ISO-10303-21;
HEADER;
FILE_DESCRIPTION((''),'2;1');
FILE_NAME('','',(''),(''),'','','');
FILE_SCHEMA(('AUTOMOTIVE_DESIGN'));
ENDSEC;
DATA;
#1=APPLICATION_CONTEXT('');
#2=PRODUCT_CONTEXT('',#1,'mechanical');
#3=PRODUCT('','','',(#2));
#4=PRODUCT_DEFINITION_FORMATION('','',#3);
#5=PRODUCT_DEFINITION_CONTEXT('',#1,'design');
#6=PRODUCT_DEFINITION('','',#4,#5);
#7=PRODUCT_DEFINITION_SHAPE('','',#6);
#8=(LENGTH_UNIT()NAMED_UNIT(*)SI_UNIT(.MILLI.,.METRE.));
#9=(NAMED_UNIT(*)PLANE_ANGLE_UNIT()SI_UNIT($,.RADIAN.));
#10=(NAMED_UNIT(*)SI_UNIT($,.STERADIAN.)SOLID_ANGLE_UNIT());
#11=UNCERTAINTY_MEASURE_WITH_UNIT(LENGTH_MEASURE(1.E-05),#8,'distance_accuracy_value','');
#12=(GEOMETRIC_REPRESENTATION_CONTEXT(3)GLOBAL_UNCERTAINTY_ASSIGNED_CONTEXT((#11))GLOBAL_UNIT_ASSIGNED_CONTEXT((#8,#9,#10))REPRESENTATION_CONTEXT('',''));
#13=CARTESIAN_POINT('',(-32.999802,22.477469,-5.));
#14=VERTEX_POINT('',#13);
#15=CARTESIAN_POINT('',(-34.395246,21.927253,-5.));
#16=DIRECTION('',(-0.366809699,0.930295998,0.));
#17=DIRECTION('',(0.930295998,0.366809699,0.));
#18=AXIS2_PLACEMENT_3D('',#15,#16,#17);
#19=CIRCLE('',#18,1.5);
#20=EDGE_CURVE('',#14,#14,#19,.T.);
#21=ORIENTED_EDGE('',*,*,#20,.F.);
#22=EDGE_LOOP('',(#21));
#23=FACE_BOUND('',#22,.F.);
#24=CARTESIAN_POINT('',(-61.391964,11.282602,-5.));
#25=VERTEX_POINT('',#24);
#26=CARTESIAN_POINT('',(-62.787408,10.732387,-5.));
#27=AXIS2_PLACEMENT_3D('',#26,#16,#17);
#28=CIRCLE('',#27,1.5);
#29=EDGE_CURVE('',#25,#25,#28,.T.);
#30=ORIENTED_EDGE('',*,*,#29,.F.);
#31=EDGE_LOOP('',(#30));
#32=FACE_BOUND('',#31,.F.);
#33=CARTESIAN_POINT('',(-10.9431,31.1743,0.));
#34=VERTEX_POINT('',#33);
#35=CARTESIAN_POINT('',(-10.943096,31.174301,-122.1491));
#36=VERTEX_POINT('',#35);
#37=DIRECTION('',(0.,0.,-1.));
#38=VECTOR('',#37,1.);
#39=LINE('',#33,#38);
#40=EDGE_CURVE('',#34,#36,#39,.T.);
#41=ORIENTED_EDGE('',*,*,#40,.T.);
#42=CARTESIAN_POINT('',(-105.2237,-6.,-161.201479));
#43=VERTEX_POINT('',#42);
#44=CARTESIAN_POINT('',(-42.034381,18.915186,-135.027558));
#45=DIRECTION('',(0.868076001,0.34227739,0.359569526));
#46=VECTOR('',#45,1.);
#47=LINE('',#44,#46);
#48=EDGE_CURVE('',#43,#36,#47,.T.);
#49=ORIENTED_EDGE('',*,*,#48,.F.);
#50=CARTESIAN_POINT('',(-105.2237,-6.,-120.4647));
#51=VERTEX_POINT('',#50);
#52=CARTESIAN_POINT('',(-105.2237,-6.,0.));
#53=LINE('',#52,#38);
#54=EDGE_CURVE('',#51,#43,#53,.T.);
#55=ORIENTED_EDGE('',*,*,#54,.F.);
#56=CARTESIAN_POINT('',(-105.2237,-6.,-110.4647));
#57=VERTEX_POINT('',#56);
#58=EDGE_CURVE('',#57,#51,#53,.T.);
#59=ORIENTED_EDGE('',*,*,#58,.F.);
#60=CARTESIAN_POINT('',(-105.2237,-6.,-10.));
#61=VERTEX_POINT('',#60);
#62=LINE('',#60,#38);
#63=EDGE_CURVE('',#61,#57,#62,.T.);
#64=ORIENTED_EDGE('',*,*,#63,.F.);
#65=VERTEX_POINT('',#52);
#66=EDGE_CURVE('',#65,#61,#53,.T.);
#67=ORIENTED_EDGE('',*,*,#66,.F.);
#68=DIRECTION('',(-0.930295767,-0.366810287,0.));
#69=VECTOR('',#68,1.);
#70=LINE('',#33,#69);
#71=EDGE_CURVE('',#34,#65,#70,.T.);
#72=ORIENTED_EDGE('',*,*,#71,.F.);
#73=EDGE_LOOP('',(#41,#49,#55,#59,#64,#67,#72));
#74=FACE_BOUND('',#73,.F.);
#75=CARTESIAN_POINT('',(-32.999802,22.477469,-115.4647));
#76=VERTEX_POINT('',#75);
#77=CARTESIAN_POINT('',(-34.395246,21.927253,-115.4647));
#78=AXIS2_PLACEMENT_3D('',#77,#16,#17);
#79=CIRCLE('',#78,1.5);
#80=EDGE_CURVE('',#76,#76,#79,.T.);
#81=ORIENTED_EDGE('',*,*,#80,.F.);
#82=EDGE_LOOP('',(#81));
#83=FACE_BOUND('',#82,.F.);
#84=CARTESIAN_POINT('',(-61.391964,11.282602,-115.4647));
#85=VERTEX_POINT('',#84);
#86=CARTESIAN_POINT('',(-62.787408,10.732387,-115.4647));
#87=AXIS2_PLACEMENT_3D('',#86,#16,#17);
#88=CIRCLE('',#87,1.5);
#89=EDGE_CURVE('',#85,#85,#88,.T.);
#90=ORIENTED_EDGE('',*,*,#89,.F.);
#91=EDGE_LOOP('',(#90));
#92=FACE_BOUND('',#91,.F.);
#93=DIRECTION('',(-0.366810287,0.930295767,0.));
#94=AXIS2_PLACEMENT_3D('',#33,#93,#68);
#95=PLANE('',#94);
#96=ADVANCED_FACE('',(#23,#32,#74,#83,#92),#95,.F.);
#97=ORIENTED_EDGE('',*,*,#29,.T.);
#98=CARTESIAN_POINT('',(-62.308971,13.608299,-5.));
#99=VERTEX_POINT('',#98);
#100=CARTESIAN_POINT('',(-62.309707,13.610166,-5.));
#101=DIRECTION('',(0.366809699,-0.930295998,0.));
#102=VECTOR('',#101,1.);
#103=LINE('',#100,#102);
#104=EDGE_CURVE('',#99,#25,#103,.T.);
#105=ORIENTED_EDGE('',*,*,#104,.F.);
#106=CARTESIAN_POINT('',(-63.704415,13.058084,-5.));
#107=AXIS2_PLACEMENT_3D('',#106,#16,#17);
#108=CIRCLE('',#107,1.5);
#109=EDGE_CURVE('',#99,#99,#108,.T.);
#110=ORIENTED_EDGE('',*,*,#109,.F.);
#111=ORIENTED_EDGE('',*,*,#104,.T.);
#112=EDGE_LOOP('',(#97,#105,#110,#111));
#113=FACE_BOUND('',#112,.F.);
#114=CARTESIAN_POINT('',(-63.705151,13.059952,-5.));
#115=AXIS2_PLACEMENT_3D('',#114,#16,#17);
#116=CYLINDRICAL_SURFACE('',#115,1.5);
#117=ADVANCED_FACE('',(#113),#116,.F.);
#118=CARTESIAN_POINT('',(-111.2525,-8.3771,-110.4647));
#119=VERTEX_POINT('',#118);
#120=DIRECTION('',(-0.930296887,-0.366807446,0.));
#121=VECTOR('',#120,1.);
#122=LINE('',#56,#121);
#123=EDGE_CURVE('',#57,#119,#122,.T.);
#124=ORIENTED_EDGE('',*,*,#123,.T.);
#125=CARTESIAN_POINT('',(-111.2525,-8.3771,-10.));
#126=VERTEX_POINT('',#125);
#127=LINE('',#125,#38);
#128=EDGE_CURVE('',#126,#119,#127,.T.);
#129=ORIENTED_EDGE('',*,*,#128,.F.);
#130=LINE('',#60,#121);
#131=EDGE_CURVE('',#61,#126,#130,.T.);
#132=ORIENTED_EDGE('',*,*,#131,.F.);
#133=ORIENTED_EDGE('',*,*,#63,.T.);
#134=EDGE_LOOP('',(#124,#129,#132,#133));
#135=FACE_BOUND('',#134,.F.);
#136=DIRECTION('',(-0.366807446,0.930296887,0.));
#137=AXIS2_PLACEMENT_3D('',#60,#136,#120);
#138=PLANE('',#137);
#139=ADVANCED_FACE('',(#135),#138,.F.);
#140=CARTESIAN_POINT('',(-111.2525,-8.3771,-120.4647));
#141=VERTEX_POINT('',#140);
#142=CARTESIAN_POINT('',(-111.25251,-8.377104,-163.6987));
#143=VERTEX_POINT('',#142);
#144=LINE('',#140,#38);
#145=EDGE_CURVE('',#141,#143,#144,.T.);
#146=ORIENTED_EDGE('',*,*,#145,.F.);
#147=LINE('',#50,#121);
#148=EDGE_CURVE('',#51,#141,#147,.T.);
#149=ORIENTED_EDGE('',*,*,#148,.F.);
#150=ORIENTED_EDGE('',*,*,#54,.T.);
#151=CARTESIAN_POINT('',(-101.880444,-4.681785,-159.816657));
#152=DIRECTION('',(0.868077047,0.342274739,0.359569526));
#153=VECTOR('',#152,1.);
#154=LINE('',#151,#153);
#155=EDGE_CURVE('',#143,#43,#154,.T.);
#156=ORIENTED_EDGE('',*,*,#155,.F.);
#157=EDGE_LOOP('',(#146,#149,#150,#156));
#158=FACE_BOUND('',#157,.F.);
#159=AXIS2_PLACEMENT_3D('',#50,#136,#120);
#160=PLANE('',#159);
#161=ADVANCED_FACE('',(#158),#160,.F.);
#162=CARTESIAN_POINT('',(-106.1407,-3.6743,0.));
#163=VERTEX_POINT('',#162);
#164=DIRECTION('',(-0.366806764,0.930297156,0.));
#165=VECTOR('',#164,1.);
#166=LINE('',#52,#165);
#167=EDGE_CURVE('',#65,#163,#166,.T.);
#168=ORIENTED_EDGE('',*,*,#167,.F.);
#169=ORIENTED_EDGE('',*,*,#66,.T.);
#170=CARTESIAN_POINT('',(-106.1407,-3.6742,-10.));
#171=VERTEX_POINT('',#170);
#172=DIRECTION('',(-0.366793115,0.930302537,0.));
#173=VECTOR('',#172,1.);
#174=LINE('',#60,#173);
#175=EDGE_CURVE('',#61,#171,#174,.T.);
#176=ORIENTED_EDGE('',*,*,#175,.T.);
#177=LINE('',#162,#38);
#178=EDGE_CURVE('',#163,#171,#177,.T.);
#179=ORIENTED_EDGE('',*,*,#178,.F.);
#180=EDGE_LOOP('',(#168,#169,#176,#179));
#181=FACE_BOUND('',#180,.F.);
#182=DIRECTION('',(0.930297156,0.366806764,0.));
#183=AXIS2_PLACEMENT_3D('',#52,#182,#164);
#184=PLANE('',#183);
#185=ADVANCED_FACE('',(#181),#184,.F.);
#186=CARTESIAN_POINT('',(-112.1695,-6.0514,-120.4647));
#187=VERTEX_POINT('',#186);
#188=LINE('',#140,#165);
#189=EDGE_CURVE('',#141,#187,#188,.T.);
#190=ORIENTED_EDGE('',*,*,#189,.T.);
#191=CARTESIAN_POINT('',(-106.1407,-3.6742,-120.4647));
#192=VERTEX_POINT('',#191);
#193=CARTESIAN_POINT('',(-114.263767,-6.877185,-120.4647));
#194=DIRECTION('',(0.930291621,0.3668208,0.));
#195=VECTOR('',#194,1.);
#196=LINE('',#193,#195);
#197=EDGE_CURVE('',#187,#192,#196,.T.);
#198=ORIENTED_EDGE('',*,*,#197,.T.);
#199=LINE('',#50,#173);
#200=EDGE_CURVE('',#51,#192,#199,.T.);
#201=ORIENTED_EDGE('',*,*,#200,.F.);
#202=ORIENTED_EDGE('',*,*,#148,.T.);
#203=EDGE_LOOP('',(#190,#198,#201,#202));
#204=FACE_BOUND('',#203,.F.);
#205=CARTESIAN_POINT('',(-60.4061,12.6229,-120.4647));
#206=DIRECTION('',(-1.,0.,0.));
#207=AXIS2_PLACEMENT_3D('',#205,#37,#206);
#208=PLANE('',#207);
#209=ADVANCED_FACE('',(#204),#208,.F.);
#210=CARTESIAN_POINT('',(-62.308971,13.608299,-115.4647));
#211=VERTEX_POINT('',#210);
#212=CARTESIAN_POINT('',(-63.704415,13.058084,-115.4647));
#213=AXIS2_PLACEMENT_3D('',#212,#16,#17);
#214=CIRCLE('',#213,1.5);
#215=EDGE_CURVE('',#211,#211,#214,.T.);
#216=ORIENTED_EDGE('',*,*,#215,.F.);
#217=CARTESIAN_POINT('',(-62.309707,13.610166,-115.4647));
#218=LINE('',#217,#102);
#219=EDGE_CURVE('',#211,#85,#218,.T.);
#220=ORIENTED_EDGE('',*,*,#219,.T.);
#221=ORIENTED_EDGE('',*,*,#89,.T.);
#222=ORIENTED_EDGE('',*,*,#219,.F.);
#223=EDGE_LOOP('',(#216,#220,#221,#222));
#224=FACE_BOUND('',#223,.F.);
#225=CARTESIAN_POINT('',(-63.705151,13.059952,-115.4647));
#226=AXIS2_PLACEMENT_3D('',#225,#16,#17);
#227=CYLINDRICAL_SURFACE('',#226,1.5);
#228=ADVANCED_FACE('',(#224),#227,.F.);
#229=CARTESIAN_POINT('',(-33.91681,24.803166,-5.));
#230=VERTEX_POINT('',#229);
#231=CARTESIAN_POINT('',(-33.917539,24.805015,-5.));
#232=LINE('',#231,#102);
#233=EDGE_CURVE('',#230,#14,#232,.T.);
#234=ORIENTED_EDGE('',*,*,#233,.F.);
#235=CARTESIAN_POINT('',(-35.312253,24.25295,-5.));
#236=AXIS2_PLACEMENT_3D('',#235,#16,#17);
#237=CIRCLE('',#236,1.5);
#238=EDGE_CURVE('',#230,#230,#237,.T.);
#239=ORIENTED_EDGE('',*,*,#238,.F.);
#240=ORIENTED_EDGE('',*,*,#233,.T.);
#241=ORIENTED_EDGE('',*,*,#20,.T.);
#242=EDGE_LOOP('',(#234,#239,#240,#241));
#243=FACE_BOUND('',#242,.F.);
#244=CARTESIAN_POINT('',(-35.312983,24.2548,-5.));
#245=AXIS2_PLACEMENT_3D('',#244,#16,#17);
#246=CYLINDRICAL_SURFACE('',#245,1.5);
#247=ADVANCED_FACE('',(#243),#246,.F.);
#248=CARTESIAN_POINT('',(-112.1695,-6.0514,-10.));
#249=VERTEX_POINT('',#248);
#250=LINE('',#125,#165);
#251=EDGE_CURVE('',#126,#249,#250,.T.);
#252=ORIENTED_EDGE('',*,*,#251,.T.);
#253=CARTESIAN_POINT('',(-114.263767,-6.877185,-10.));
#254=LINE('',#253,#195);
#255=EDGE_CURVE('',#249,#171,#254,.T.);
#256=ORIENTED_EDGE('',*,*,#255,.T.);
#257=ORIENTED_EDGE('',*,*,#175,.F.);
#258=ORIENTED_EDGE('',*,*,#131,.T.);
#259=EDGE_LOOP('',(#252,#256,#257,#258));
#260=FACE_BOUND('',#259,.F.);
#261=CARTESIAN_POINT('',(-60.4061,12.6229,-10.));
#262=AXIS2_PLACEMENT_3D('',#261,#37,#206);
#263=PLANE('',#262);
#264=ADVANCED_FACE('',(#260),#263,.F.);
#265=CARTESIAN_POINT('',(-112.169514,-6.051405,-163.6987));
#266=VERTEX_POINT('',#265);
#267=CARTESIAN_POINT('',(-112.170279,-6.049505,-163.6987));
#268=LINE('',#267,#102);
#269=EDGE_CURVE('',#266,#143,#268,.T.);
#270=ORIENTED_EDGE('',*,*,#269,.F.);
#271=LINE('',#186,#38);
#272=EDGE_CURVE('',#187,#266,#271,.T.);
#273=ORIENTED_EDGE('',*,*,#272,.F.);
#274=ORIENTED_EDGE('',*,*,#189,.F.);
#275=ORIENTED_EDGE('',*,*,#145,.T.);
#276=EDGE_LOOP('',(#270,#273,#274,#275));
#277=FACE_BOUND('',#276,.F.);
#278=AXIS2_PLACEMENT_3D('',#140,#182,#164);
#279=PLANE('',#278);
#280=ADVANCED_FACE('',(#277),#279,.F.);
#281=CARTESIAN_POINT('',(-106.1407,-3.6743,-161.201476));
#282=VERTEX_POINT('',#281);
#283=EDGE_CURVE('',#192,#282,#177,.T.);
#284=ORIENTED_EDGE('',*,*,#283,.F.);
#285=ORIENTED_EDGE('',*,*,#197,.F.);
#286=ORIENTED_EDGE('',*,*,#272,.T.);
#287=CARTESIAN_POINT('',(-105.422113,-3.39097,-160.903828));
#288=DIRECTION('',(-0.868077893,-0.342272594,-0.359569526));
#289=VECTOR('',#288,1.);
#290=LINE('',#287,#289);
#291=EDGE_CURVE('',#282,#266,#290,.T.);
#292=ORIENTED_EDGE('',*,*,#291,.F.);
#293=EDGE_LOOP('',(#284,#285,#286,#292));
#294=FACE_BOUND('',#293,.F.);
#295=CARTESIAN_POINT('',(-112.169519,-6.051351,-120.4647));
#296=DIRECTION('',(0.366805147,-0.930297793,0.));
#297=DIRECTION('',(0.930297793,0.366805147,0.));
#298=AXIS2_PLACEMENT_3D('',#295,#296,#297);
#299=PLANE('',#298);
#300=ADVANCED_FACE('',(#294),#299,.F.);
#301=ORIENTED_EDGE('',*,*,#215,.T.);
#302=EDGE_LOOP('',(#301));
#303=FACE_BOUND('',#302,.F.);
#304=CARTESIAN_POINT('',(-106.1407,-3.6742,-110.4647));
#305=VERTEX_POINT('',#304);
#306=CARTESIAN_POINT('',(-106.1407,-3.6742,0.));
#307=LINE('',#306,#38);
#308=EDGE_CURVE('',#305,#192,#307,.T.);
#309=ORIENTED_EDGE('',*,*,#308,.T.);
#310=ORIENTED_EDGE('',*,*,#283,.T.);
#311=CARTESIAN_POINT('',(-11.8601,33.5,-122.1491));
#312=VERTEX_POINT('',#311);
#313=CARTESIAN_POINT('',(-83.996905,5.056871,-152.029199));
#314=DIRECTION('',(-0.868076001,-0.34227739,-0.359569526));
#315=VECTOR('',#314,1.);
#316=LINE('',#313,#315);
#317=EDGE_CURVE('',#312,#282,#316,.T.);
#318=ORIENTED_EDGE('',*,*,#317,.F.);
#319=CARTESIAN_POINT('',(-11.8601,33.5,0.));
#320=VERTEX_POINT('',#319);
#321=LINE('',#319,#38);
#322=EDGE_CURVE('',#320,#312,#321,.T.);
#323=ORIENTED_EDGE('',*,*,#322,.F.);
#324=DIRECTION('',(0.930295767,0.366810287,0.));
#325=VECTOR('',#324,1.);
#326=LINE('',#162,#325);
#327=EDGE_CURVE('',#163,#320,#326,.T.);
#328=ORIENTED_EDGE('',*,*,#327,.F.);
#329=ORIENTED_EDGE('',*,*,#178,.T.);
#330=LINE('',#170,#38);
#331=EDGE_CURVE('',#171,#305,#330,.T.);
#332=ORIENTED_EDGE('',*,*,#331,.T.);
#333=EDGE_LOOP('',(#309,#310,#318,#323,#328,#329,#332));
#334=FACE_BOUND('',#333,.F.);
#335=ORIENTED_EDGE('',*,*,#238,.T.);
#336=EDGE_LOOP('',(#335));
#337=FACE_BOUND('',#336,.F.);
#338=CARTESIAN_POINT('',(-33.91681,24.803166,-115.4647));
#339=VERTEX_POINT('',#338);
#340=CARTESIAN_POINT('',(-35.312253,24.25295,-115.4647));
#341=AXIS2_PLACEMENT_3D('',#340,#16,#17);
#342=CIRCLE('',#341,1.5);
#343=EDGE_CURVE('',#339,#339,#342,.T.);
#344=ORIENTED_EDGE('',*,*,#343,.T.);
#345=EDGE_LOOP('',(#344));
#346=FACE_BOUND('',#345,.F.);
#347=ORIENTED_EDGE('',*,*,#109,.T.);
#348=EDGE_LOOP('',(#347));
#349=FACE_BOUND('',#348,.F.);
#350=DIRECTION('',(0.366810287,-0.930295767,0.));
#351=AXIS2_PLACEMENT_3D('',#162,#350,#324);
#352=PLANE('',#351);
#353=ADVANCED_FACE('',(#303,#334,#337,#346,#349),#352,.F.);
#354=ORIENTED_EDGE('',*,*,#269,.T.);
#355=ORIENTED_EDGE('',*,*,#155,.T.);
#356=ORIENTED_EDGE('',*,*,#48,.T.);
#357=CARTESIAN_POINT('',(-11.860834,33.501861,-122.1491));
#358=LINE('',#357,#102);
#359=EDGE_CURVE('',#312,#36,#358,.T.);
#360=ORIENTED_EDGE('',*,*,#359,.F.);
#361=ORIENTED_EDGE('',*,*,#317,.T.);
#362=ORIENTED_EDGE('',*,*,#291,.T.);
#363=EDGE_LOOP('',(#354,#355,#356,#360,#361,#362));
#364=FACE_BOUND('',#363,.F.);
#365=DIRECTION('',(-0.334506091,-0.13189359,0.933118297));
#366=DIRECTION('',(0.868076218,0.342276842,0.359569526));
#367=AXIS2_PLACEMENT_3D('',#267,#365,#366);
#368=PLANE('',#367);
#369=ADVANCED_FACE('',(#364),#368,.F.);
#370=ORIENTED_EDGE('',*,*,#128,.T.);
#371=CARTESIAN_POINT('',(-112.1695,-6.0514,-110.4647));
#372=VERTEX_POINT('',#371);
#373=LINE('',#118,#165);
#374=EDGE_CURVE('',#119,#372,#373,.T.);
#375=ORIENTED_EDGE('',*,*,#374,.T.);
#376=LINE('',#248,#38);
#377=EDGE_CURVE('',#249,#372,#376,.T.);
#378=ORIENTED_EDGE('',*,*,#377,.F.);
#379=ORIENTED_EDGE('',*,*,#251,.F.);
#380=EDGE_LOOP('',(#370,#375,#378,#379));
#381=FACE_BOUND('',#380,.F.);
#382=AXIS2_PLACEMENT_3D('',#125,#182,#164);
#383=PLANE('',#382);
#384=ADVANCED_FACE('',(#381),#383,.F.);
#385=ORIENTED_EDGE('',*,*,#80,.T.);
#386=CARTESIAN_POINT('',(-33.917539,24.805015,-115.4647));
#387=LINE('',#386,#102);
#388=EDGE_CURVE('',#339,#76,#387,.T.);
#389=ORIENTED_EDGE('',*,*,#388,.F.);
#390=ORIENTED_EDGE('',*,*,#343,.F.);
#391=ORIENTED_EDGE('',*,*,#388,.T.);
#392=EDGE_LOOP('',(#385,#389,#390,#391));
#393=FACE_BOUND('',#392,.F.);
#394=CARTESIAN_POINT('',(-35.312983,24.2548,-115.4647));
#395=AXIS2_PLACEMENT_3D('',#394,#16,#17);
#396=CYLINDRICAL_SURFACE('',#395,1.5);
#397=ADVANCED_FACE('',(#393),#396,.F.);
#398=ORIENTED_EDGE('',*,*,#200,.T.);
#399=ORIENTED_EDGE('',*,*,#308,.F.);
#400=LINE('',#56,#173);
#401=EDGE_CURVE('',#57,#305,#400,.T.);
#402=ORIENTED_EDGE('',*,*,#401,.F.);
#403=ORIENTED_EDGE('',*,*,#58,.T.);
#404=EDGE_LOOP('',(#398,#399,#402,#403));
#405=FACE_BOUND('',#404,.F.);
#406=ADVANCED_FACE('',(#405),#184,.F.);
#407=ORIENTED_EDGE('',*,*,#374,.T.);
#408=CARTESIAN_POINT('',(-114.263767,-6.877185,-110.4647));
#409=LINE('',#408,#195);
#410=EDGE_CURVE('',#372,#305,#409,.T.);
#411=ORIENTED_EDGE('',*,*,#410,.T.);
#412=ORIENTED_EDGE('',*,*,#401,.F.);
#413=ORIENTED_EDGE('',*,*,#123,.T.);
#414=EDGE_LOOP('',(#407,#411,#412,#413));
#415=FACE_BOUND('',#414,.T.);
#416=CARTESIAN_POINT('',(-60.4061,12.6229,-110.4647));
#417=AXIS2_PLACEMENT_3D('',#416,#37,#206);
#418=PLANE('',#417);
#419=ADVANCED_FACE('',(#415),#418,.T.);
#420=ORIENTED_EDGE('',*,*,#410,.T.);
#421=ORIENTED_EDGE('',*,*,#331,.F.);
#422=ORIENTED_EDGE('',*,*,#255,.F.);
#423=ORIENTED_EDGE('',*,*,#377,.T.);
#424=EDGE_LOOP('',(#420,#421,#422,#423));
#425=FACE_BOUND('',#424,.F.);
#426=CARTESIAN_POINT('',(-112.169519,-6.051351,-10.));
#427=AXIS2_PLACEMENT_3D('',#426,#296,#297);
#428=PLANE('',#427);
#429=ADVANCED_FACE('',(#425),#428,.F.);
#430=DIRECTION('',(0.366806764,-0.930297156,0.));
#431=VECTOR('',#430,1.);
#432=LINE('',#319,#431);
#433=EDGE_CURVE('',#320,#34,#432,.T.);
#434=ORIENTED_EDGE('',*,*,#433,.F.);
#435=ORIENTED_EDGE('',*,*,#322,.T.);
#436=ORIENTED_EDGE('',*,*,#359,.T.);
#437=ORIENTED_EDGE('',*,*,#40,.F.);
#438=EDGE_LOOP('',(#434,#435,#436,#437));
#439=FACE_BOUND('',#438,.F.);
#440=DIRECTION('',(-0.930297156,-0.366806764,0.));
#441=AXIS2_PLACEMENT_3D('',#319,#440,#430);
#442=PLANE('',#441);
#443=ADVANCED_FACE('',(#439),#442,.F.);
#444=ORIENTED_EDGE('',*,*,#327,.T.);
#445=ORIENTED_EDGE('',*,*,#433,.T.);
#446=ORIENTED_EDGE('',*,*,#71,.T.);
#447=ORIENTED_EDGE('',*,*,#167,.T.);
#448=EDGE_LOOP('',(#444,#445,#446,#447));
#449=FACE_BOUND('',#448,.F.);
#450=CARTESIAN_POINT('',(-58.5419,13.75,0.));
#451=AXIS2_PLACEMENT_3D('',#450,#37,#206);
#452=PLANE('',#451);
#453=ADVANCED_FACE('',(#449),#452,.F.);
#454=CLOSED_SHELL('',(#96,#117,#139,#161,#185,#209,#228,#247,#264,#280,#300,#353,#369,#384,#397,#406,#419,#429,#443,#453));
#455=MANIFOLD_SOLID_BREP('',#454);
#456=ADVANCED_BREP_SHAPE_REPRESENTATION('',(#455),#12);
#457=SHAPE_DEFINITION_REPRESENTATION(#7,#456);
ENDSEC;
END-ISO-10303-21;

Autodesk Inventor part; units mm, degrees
ref_plane "YZ Plane" through (0, 0, 0) normal (1, 0, 0) x (0, 1, 0)
ref_plane "作業平面1" through (-58.5419, 13.75, 0) normal (0, 0, -1) x (-1, 0, 0)
sketch "スケッチ1" plane through (-58.5419, 13.75, 0) normal (0, 0, -1) x (-1, 0, 0)
  line L0 (-47.5988, 17.4243) -> (46.6818, -19.75) projected
  line L1 (46.6818, -19.75) -> (47.5988, -17.4243) projected
  line L2 (47.5988, -17.4243) -> (-46.6818, 19.75) projected
  line L3 (-46.6818, 19.75) -> (-47.5988, 17.4243) projected
  point P0 (-58.5419, -13.75)
ref_plane "作業平面2" through (-125.5285, -9.35, -169.7679) normal (-0.3826834, 0, 0.9238795) x (0.9238795, 0, 0.3826834)
extrude "押し出し1" add sketch "スケッチ1" along normal up to surface surface through (-125.5285, -9.35, -169.7679) normal (-0.3826834, 0, 0.9238795)
sketch "スケッチ2" plane through (-106.1408, -3.6743, 0) normal (-0.3668097, 0.930296, 0) x (0.930296, 0.3668097, 0)
  circle A0 centre (76.1355, 115.4647) radius 1.5 projected
  circle A1 centre (45.616, 115.4647) radius 1.5 projected
  line L0 (30.3562, 120.4647) -> (30.3562, 110.4647) projected
  line L1 (91.3953, 120.4647) -> (30.3562, 120.4647) projected
  line L2 (91.3953, 110.4647) -> (91.3953, 120.4647) projected
  line L3 (30.3562, 110.4647) -> (91.3953, 110.4647) projected
  circle A2 centre (76.1355, 5) radius 1.5 projected
  circle A3 centre (45.616, 5) radius 1.5 projected
  line L4 (30.3562, 10) -> (30.3562, 0) projected
  line L5 (91.3953, 10) -> (30.3562, 10) projected
  line L6 (91.3953, 0) -> (91.3953, 10) projected
  line L7 (30.3562, 0) -> (91.3953, 0) projected
  point P0 (100.0901, 0)
extrude "押し出し2" cut sketch "スケッチ2" against normal blind 10 contours A0 | A1 | A2 | A3
ref_plane "作業平面3" through (-60.4061, 12.6229, -10) normal (0, 0, -1) x (-1, 0, 0)
sketch "スケッチ3" plane through (-60.4061, 12.6229, -10) normal (0, 0, -1) x (-1, 0, 0)
  line L0 (53.8577, -19.5) -> (45.423, -16.1743)
  line L1 (53.8577, -21) -> (53.8577, -19.5)
  line L2 (-53.8577, -21) -> (53.8577, -21)
  line L3 (44.8176, -18.6229) -> (45.7346, -16.2971) projected
  line L4 (45.7346, -16.2971) -> (44.8176, -18.6229)
  line L5 (44.8176, -18.6229) -> (50.8464, -21)
  line L6 (50.8464, -21) -> (51.7634, -18.6743)
  line L7 (51.7634, -18.6743) -> (45.7346, -16.2971)
  point P0 (-60.4061, -12.6229)
  point P1 (44.506, -18.5)
  point P2 (51.7634, -18.6743)
ref_plane "作業平面4" through (-114.2638, -8.3771, -110.4647) normal (0, 0, 1) x (1, 0, 0)
extrude "押し出し3" add sketch "スケッチ3" along normal up to surface (100.4647 mm away) contours L6 L5 L3 L0
ref_plane "作業平面5" through (-60.4061, 12.6229, -120.4647) normal (0, 0, -1) x (-1, 0, 0)
sketch "スケッチ4" plane through (-60.4061, 12.6229, -120.4647) normal (0, 0, -1) x (-1, 0, 0)
  line L0 (50.8464, -21) -> (51.7634, -18.6743) projected
  line L1 (44.8176, -18.6229) -> (45.7346, -16.2971) projected
  line L2 (53.8577, -19.5) -> (45.423, -16.1743)
  line L3 (44.8176, -18.6229) -> (50.8464, -21) projected
  point P0 (-60.4061, -12.6229)
extrude "押し出し4" add sketch "スケッチ4" along normal up to surface surface through (-58.5419, 13.75, -142.0212) normal (-0.3826834, 0, 0.9238795)
sketch "スケッチ6" plane through (-11.8601, 33.5, 0) normal (-0.3668097, 0.930296, 0) x (0.930296, 0.3668097, 0)
  line L0 (-107.8253, 164.2345) -> (0, 122.685) projected
  line L1 (0, 0) -> (0, 122.685) projected
  line L2 (-107.8253, 120.4647) -> (-107.8253, 164.2345) projected
  line L3 (-107.8253, 163.6987) -> (0, 122.1491)
  point P0 (-1.2547, 0)
  dimension "d9" = 0.5
extrude "押し出し5" cut sketch "スケッチ6" against normal blind 2.5
properties part number "Right_Wall" material "木材 (カエデ材)"
